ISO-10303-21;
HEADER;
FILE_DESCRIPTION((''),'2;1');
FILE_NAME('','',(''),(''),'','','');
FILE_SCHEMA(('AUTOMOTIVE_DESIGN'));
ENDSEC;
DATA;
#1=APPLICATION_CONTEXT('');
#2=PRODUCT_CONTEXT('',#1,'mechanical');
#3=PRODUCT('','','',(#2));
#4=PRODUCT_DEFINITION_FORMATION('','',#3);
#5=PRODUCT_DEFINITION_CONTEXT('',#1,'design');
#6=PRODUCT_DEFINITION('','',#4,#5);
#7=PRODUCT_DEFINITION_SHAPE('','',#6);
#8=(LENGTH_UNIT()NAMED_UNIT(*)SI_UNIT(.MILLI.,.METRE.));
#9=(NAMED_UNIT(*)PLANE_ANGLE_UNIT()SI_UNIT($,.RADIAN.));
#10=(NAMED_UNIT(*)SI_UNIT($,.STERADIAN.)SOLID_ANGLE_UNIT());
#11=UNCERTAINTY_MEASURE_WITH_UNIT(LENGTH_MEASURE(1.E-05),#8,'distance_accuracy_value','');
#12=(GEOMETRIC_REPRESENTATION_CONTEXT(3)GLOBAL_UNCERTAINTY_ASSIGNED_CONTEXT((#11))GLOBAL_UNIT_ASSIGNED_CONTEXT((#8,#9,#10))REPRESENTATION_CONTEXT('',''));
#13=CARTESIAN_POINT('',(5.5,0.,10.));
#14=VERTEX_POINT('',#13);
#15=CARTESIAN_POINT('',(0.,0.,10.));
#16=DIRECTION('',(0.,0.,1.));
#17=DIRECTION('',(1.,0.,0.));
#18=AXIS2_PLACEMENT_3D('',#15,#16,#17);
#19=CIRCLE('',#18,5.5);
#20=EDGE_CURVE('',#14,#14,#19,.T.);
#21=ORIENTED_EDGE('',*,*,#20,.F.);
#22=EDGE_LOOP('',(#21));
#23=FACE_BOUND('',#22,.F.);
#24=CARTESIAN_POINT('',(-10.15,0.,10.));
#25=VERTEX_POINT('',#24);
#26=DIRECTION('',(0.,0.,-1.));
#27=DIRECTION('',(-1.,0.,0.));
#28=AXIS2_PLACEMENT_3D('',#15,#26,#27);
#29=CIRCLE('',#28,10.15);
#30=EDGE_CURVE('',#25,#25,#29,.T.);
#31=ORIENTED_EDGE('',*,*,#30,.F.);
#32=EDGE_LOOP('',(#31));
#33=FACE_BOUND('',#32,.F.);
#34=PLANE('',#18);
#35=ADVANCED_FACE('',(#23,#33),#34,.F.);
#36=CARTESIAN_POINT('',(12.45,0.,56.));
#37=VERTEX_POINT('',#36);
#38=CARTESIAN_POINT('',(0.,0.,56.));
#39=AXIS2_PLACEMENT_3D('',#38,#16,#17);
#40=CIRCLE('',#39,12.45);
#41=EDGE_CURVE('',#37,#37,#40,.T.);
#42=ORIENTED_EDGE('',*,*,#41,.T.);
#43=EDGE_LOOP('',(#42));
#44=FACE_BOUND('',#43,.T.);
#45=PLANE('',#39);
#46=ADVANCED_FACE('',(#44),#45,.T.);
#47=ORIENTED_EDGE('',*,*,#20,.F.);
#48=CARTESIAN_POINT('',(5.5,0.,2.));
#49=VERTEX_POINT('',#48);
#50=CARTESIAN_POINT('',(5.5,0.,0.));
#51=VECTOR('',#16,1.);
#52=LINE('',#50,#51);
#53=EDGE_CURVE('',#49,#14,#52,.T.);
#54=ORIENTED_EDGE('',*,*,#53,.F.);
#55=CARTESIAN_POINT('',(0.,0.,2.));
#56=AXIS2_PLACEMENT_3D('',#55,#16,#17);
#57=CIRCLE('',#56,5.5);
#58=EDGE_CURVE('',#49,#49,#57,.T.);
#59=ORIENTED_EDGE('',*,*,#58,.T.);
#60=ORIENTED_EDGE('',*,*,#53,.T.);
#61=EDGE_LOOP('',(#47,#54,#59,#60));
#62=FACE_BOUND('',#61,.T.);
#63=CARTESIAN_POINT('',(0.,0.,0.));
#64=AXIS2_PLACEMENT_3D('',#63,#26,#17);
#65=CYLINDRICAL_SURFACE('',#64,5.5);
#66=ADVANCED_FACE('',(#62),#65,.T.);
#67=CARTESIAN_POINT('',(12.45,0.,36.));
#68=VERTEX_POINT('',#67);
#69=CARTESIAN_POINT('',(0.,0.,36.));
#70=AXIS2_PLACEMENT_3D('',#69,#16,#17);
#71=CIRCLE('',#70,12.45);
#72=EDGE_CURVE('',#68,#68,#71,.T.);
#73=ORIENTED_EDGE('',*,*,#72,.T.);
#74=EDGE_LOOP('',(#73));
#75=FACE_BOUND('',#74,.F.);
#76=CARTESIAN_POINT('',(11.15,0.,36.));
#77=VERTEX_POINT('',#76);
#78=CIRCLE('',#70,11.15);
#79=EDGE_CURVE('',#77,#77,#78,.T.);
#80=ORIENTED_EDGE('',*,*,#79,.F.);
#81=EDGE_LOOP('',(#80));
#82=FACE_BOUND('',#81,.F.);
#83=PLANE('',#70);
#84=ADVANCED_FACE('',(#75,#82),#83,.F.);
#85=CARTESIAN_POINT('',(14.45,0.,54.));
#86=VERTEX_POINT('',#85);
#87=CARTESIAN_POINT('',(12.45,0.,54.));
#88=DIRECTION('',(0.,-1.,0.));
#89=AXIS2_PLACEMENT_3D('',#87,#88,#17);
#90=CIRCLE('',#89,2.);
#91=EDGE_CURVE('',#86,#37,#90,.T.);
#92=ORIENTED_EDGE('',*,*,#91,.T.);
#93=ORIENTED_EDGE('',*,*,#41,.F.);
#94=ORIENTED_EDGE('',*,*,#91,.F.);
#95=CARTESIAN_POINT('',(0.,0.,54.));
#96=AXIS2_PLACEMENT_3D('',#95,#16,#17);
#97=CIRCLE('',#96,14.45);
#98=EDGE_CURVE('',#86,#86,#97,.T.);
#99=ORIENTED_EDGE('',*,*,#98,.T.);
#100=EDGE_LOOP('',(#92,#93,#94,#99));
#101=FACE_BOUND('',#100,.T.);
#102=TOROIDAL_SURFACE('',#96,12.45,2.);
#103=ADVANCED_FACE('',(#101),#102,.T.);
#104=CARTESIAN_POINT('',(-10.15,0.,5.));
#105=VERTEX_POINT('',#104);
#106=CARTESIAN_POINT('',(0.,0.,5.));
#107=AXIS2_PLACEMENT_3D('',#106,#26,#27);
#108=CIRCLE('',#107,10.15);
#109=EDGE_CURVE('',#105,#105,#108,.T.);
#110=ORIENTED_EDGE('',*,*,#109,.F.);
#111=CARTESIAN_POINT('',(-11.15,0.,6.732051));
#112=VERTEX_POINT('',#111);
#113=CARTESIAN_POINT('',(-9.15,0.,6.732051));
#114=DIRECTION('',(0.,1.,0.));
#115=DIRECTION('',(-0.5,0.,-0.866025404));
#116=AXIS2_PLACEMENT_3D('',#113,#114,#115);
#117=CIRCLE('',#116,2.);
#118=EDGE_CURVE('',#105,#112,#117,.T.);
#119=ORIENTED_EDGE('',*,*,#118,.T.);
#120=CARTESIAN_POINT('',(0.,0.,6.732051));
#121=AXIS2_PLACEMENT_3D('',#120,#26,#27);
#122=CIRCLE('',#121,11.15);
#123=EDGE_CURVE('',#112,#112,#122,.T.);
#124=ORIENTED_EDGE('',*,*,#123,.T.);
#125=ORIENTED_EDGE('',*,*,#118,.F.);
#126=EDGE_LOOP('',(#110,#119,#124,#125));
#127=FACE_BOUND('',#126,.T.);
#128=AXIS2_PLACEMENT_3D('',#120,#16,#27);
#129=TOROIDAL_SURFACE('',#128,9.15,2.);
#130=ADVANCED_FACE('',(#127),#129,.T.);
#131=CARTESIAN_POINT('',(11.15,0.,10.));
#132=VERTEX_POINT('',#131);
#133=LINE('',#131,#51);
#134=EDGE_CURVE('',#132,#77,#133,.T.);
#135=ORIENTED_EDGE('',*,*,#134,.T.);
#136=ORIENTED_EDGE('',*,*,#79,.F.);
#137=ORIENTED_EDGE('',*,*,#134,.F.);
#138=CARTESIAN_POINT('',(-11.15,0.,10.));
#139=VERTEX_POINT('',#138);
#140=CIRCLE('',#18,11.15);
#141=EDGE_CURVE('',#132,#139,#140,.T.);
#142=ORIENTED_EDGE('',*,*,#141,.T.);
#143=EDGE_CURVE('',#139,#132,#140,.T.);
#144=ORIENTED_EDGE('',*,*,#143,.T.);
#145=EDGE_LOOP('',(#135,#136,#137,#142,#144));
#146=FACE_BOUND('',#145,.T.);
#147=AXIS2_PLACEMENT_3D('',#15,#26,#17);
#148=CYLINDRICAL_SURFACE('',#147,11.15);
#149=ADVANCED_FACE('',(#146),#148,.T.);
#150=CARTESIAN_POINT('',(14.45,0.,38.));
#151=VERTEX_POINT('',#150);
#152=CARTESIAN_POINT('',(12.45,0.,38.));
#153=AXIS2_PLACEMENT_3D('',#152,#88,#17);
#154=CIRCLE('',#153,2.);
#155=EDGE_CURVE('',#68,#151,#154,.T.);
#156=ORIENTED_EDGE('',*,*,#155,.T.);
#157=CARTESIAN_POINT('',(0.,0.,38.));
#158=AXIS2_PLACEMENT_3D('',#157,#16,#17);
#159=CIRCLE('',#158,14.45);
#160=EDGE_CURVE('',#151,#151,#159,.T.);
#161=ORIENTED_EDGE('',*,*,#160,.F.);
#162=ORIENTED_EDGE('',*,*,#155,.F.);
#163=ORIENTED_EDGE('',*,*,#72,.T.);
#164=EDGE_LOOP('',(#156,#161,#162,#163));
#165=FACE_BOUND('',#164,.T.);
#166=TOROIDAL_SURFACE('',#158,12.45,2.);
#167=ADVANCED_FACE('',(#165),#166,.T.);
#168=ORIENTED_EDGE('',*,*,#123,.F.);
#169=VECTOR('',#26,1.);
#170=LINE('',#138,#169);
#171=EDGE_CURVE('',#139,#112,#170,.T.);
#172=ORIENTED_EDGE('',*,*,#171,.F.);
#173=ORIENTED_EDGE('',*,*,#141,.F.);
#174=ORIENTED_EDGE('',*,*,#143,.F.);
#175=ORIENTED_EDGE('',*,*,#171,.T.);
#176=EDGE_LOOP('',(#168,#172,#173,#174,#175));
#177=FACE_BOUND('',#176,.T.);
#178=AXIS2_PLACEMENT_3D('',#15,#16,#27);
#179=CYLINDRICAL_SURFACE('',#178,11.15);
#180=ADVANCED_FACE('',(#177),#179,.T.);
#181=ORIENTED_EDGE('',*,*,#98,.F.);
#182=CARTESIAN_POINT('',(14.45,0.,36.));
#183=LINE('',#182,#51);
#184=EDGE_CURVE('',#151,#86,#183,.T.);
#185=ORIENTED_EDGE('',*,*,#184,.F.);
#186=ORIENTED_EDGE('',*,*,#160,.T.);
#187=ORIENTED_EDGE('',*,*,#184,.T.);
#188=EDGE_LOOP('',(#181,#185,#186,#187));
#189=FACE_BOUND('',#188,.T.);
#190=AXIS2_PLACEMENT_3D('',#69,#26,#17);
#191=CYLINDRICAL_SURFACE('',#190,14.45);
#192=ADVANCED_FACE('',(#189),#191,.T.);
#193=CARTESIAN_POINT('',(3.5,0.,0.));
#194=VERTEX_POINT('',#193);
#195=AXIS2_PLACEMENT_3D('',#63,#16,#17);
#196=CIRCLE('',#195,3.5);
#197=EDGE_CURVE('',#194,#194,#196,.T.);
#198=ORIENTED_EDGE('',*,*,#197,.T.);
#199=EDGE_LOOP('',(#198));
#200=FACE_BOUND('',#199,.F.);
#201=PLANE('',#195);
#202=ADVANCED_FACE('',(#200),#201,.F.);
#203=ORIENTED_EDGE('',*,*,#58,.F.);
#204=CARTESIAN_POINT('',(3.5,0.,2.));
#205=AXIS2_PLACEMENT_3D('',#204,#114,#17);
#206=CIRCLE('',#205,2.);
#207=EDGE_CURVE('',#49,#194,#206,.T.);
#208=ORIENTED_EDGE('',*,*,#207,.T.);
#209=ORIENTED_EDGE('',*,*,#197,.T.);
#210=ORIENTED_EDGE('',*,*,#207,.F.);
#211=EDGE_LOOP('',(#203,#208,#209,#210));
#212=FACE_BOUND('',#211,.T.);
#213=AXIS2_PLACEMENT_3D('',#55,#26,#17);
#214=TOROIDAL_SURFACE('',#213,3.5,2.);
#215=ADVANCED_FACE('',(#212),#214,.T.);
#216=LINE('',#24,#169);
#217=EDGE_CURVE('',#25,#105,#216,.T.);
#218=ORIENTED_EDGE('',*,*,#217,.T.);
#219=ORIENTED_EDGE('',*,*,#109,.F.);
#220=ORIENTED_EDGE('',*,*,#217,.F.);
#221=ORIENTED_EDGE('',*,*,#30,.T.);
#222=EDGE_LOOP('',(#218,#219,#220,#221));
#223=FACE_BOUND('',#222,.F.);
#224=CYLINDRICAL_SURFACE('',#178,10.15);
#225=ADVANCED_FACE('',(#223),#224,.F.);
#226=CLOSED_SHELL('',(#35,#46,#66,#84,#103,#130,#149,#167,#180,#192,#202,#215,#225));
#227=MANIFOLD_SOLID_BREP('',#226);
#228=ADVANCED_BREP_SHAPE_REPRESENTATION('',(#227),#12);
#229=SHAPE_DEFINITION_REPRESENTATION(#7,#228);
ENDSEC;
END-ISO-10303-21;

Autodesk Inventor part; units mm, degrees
ref_plane "YZ Plane" through (0, 0, 0) normal (1, 0, 0) x (0, 1, 0)
ref_plane "XZ Plane" through (0, 0, 0) normal (0, 1, 0) x (-1, 0, 0)
ref_plane "XY Plane" through (0, 0, 0) normal (0, 0, 1) x (1, 0, 0)
sketch "Sketch1" plane through (0, 0, 0) normal (0, 0, 1) x (1, 0, 0)
  circle A0 centre (0, 0) radius 5.5
  dimension "d0" = 11
extrude "Extrusion1" add sketch "Sketch1" along normal blind 10
sketch "Sketch2" plane through (0, 0, 10) normal (0, 0, 1) x (1, 0, 0)
  circle A0 centre (0, 0) radius 11.15
  dimension "d3" = 22.3
extrude "Extrusion3" add sketch "Sketch2" along normal blind 26
sketch "Sketch3" plane through (0, 0, 10) normal (0, 0, -1) x (-1, 0, 0)
  circle A0 centre (0, 0) radius 10.15
  circle A1 centre (0, 0) radius 11.15
  dimension "d8" = 20.3
  dimension "d9" = 22.3
extrude "Extrusion4" add sketch "Sketch3" along normal blind 5
sketch "Sketch4" plane through (0, 0, 36) normal (0, 0, 1) x (1, 0, 0)
  circle A0 centre (0, 0) radius 14.45
  dimension "d12" = 28.9
extrude "Extrusion5" add sketch "Sketch4" along normal blind 20
fillet "Fillet1" radius 2 1 edges at (-14.45, 0, 56)
fillet "Fillet2" radius 2 1 edges at (-5.5, 0, 0)
fillet "Fillet3" radius 2 1 edges at (11.15, 0, 5)
fillet "Fillet4" radius 2 1 edges at (-14.45, 0, 36)
properties part number "Elbow_Parallel_Rod_V1"
